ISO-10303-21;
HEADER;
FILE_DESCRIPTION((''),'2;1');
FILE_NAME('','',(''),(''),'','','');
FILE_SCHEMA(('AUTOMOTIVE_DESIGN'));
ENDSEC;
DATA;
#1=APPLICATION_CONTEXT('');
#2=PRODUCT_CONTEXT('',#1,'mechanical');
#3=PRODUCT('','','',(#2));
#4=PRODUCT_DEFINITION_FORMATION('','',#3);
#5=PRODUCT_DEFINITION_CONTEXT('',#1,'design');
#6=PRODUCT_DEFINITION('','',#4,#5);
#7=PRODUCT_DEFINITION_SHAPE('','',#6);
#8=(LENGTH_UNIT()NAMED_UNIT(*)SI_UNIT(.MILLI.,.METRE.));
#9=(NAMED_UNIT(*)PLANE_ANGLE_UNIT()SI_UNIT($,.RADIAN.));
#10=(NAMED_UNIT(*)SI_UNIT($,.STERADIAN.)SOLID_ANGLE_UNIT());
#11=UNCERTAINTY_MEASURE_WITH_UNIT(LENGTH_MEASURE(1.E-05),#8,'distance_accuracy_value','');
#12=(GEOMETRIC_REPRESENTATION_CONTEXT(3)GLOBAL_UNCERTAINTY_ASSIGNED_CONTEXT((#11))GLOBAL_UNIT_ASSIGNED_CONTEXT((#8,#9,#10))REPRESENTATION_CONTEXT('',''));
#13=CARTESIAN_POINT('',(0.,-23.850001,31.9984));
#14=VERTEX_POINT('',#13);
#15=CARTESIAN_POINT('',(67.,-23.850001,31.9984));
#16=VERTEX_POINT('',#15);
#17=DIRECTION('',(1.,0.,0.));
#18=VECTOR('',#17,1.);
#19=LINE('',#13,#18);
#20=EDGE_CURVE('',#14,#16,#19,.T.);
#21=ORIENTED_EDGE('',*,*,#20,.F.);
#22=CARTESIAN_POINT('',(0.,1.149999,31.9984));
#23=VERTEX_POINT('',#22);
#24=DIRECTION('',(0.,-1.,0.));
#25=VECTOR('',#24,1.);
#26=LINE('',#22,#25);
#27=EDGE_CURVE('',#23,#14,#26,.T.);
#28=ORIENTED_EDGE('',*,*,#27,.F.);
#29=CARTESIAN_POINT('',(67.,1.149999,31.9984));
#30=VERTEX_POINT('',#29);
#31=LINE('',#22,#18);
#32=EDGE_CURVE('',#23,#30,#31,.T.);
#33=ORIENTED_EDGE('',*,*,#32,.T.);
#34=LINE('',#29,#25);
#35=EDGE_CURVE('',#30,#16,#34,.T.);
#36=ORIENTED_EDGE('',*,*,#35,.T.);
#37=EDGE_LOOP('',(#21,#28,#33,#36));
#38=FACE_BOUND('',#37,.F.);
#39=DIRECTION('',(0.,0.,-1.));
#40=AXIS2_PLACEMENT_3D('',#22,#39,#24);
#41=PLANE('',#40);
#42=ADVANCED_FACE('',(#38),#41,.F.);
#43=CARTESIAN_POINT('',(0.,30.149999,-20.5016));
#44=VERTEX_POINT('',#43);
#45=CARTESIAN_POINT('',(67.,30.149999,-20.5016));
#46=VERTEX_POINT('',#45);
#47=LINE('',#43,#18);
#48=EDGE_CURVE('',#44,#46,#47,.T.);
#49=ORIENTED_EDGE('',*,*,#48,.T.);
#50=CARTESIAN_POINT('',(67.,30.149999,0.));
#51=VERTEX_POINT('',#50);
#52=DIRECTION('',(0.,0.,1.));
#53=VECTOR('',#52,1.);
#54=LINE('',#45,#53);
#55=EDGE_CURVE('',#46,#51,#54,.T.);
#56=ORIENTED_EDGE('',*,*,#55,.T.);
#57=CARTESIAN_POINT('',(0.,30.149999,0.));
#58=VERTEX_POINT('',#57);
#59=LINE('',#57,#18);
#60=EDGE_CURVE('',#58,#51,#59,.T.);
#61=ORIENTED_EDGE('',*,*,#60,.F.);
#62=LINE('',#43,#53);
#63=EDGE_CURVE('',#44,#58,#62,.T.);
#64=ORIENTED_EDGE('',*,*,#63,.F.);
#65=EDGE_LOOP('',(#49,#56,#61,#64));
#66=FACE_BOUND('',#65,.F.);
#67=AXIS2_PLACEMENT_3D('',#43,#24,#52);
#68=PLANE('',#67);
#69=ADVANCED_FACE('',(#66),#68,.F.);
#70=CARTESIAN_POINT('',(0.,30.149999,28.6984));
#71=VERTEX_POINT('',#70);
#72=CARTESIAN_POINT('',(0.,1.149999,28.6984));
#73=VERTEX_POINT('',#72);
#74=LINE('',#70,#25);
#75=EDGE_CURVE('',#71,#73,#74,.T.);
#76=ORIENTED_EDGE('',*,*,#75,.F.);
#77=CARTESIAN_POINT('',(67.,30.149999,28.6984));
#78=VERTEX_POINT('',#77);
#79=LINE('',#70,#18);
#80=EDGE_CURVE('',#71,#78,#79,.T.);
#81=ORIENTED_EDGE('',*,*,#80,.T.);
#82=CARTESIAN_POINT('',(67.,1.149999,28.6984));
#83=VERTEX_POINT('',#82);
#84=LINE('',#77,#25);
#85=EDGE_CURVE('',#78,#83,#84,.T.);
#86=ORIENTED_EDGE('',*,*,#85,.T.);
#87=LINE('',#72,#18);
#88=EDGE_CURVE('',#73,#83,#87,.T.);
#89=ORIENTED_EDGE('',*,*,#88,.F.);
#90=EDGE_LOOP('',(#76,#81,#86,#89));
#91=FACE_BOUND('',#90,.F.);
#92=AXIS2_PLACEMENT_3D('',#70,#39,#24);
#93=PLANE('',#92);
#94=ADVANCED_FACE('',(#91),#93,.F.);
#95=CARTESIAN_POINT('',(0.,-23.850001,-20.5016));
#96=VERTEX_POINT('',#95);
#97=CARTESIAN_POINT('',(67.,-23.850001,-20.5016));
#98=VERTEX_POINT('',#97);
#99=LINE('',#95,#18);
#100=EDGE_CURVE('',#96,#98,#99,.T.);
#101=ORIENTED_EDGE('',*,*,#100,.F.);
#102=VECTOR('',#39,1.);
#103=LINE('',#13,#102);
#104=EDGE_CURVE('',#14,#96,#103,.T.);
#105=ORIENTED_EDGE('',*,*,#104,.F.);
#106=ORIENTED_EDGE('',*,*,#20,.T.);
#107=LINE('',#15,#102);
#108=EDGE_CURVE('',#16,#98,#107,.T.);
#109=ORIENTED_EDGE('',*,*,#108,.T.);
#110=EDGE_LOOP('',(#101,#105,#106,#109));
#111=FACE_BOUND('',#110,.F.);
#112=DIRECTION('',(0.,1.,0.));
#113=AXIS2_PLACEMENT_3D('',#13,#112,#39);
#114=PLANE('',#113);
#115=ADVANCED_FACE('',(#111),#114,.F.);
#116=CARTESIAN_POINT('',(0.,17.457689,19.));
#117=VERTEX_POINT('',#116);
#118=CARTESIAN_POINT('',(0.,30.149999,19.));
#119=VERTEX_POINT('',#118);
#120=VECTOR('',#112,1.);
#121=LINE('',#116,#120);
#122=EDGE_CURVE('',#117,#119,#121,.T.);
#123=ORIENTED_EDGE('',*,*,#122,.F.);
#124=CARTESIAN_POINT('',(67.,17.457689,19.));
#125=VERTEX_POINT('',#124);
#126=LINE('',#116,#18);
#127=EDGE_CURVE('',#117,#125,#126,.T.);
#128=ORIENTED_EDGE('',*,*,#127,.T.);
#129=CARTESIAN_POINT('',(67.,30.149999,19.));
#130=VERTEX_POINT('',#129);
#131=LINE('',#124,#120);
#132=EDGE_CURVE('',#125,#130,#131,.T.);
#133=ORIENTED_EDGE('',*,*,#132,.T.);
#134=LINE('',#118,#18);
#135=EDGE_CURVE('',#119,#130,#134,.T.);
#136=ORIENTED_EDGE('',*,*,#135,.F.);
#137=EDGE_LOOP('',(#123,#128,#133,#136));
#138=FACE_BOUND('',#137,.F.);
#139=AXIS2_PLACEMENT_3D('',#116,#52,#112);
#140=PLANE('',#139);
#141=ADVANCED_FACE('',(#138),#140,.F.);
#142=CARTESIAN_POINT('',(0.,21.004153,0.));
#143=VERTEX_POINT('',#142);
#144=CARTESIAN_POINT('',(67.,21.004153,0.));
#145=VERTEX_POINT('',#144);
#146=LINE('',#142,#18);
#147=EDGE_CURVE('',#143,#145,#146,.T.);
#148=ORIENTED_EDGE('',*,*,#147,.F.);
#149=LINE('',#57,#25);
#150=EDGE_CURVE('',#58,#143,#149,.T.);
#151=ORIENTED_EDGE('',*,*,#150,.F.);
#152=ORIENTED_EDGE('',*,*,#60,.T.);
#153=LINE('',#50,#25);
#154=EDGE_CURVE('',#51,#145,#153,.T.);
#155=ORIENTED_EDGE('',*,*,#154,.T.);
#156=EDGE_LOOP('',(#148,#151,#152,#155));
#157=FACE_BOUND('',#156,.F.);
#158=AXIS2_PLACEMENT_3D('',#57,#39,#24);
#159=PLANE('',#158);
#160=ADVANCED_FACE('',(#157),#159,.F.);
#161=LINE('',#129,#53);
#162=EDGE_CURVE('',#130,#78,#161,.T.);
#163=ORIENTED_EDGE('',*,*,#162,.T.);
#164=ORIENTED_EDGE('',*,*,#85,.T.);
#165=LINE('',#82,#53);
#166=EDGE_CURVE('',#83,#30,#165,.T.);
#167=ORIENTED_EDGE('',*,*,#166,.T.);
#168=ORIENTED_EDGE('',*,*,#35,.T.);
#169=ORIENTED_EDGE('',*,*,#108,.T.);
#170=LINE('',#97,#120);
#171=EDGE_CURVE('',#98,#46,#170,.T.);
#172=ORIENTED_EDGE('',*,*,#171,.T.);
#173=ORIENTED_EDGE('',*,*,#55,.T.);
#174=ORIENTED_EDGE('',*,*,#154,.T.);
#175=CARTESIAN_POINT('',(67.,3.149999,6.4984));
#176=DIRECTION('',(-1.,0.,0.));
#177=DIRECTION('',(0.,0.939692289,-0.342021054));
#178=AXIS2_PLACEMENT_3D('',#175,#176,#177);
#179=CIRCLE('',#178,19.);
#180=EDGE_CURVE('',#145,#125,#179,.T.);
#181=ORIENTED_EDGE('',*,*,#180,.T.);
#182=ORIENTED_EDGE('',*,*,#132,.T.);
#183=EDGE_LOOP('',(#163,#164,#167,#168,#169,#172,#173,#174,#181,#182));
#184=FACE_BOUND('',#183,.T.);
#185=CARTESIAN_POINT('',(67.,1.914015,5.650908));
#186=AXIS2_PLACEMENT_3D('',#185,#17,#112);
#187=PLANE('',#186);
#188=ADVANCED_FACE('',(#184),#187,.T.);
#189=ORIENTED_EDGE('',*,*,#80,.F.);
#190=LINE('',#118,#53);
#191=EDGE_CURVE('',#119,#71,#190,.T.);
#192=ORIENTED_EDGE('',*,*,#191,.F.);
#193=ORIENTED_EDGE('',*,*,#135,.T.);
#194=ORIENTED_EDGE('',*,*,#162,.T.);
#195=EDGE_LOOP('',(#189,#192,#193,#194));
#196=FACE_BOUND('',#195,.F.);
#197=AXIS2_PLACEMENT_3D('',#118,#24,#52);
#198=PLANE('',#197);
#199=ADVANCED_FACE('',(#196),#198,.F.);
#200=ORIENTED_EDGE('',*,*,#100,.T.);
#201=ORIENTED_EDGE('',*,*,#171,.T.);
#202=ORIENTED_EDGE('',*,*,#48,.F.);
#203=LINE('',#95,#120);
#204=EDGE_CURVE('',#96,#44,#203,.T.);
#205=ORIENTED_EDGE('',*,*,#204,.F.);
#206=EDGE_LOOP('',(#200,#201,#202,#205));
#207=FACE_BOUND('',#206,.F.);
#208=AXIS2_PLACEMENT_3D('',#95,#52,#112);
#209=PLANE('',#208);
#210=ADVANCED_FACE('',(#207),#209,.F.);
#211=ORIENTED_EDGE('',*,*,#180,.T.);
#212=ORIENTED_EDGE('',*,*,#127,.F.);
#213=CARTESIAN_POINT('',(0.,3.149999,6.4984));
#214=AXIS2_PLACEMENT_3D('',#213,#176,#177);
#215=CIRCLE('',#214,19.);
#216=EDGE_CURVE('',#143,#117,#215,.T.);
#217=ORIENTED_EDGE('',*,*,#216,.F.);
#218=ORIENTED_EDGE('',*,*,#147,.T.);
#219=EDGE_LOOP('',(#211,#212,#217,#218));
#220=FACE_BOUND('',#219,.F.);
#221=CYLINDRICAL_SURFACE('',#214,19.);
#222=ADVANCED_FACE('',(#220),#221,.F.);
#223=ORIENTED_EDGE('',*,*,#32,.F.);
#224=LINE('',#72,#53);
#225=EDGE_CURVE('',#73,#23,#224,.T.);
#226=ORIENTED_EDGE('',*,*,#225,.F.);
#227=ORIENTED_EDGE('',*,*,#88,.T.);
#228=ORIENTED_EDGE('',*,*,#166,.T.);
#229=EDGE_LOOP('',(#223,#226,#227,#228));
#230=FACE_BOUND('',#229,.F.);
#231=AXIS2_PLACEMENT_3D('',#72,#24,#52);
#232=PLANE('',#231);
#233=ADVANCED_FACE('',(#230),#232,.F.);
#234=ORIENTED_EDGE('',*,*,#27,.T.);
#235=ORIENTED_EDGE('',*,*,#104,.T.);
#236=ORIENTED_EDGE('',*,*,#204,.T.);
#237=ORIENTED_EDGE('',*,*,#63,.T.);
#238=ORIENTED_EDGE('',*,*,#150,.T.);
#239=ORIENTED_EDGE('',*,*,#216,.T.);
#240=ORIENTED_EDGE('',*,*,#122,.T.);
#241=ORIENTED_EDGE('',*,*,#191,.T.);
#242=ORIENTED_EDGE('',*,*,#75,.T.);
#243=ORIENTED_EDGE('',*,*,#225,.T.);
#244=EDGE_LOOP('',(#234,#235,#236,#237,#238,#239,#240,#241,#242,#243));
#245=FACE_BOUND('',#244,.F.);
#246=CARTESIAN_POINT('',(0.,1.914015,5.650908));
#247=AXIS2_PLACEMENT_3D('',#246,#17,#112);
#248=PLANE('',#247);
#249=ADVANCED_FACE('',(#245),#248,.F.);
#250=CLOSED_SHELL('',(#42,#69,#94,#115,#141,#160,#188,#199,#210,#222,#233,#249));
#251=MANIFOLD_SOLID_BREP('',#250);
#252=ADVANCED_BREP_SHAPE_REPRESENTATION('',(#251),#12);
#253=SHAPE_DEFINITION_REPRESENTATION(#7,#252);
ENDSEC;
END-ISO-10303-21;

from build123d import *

# Parameters (mm, degrees)
F1_DEPTH = 67


# Not quite as in the source:
# - a feature names something its author has since deleted; it is built from what else it names


with BuildPart() as f1:
    # F0 (on Right) → F1 (new body)
    with BuildSketch(Plane.YZ):
        with BuildLine():
            Line((-23.8500006944, 31.9984000194), (-23.8500006944, -20.5015999806))
            Line((-23.8500006944, -20.5015999806), (30.1499993056, -20.5015999806))
            Line((30.1499993056, -20.5015999806), (30.1499993056, 0))
            Line((30.1499993056, 0), (21.0041528052, 0))
            ThreePointArc((21.0041528052, 0), (-15.527421475, 3.0121480227), (17.457689473, 19))
            Line((17.457689473, 19), (30.1499993056, 19))
            Line((30.1499993056, 19), (30.1499993056, 28.6984000194))
            Line((30.1499993056, 28.6984000194), (1.1499993056, 28.6984000194))
            Line((1.1499993056, 28.6984000194), (1.1499993056, 31.9984000194))
            Line((1.1499993056, 31.9984000194), (-23.8500006944, 31.9984000194))
        make_face()
    extrude(amount=F1_DEPTH)


solid = f1.part
